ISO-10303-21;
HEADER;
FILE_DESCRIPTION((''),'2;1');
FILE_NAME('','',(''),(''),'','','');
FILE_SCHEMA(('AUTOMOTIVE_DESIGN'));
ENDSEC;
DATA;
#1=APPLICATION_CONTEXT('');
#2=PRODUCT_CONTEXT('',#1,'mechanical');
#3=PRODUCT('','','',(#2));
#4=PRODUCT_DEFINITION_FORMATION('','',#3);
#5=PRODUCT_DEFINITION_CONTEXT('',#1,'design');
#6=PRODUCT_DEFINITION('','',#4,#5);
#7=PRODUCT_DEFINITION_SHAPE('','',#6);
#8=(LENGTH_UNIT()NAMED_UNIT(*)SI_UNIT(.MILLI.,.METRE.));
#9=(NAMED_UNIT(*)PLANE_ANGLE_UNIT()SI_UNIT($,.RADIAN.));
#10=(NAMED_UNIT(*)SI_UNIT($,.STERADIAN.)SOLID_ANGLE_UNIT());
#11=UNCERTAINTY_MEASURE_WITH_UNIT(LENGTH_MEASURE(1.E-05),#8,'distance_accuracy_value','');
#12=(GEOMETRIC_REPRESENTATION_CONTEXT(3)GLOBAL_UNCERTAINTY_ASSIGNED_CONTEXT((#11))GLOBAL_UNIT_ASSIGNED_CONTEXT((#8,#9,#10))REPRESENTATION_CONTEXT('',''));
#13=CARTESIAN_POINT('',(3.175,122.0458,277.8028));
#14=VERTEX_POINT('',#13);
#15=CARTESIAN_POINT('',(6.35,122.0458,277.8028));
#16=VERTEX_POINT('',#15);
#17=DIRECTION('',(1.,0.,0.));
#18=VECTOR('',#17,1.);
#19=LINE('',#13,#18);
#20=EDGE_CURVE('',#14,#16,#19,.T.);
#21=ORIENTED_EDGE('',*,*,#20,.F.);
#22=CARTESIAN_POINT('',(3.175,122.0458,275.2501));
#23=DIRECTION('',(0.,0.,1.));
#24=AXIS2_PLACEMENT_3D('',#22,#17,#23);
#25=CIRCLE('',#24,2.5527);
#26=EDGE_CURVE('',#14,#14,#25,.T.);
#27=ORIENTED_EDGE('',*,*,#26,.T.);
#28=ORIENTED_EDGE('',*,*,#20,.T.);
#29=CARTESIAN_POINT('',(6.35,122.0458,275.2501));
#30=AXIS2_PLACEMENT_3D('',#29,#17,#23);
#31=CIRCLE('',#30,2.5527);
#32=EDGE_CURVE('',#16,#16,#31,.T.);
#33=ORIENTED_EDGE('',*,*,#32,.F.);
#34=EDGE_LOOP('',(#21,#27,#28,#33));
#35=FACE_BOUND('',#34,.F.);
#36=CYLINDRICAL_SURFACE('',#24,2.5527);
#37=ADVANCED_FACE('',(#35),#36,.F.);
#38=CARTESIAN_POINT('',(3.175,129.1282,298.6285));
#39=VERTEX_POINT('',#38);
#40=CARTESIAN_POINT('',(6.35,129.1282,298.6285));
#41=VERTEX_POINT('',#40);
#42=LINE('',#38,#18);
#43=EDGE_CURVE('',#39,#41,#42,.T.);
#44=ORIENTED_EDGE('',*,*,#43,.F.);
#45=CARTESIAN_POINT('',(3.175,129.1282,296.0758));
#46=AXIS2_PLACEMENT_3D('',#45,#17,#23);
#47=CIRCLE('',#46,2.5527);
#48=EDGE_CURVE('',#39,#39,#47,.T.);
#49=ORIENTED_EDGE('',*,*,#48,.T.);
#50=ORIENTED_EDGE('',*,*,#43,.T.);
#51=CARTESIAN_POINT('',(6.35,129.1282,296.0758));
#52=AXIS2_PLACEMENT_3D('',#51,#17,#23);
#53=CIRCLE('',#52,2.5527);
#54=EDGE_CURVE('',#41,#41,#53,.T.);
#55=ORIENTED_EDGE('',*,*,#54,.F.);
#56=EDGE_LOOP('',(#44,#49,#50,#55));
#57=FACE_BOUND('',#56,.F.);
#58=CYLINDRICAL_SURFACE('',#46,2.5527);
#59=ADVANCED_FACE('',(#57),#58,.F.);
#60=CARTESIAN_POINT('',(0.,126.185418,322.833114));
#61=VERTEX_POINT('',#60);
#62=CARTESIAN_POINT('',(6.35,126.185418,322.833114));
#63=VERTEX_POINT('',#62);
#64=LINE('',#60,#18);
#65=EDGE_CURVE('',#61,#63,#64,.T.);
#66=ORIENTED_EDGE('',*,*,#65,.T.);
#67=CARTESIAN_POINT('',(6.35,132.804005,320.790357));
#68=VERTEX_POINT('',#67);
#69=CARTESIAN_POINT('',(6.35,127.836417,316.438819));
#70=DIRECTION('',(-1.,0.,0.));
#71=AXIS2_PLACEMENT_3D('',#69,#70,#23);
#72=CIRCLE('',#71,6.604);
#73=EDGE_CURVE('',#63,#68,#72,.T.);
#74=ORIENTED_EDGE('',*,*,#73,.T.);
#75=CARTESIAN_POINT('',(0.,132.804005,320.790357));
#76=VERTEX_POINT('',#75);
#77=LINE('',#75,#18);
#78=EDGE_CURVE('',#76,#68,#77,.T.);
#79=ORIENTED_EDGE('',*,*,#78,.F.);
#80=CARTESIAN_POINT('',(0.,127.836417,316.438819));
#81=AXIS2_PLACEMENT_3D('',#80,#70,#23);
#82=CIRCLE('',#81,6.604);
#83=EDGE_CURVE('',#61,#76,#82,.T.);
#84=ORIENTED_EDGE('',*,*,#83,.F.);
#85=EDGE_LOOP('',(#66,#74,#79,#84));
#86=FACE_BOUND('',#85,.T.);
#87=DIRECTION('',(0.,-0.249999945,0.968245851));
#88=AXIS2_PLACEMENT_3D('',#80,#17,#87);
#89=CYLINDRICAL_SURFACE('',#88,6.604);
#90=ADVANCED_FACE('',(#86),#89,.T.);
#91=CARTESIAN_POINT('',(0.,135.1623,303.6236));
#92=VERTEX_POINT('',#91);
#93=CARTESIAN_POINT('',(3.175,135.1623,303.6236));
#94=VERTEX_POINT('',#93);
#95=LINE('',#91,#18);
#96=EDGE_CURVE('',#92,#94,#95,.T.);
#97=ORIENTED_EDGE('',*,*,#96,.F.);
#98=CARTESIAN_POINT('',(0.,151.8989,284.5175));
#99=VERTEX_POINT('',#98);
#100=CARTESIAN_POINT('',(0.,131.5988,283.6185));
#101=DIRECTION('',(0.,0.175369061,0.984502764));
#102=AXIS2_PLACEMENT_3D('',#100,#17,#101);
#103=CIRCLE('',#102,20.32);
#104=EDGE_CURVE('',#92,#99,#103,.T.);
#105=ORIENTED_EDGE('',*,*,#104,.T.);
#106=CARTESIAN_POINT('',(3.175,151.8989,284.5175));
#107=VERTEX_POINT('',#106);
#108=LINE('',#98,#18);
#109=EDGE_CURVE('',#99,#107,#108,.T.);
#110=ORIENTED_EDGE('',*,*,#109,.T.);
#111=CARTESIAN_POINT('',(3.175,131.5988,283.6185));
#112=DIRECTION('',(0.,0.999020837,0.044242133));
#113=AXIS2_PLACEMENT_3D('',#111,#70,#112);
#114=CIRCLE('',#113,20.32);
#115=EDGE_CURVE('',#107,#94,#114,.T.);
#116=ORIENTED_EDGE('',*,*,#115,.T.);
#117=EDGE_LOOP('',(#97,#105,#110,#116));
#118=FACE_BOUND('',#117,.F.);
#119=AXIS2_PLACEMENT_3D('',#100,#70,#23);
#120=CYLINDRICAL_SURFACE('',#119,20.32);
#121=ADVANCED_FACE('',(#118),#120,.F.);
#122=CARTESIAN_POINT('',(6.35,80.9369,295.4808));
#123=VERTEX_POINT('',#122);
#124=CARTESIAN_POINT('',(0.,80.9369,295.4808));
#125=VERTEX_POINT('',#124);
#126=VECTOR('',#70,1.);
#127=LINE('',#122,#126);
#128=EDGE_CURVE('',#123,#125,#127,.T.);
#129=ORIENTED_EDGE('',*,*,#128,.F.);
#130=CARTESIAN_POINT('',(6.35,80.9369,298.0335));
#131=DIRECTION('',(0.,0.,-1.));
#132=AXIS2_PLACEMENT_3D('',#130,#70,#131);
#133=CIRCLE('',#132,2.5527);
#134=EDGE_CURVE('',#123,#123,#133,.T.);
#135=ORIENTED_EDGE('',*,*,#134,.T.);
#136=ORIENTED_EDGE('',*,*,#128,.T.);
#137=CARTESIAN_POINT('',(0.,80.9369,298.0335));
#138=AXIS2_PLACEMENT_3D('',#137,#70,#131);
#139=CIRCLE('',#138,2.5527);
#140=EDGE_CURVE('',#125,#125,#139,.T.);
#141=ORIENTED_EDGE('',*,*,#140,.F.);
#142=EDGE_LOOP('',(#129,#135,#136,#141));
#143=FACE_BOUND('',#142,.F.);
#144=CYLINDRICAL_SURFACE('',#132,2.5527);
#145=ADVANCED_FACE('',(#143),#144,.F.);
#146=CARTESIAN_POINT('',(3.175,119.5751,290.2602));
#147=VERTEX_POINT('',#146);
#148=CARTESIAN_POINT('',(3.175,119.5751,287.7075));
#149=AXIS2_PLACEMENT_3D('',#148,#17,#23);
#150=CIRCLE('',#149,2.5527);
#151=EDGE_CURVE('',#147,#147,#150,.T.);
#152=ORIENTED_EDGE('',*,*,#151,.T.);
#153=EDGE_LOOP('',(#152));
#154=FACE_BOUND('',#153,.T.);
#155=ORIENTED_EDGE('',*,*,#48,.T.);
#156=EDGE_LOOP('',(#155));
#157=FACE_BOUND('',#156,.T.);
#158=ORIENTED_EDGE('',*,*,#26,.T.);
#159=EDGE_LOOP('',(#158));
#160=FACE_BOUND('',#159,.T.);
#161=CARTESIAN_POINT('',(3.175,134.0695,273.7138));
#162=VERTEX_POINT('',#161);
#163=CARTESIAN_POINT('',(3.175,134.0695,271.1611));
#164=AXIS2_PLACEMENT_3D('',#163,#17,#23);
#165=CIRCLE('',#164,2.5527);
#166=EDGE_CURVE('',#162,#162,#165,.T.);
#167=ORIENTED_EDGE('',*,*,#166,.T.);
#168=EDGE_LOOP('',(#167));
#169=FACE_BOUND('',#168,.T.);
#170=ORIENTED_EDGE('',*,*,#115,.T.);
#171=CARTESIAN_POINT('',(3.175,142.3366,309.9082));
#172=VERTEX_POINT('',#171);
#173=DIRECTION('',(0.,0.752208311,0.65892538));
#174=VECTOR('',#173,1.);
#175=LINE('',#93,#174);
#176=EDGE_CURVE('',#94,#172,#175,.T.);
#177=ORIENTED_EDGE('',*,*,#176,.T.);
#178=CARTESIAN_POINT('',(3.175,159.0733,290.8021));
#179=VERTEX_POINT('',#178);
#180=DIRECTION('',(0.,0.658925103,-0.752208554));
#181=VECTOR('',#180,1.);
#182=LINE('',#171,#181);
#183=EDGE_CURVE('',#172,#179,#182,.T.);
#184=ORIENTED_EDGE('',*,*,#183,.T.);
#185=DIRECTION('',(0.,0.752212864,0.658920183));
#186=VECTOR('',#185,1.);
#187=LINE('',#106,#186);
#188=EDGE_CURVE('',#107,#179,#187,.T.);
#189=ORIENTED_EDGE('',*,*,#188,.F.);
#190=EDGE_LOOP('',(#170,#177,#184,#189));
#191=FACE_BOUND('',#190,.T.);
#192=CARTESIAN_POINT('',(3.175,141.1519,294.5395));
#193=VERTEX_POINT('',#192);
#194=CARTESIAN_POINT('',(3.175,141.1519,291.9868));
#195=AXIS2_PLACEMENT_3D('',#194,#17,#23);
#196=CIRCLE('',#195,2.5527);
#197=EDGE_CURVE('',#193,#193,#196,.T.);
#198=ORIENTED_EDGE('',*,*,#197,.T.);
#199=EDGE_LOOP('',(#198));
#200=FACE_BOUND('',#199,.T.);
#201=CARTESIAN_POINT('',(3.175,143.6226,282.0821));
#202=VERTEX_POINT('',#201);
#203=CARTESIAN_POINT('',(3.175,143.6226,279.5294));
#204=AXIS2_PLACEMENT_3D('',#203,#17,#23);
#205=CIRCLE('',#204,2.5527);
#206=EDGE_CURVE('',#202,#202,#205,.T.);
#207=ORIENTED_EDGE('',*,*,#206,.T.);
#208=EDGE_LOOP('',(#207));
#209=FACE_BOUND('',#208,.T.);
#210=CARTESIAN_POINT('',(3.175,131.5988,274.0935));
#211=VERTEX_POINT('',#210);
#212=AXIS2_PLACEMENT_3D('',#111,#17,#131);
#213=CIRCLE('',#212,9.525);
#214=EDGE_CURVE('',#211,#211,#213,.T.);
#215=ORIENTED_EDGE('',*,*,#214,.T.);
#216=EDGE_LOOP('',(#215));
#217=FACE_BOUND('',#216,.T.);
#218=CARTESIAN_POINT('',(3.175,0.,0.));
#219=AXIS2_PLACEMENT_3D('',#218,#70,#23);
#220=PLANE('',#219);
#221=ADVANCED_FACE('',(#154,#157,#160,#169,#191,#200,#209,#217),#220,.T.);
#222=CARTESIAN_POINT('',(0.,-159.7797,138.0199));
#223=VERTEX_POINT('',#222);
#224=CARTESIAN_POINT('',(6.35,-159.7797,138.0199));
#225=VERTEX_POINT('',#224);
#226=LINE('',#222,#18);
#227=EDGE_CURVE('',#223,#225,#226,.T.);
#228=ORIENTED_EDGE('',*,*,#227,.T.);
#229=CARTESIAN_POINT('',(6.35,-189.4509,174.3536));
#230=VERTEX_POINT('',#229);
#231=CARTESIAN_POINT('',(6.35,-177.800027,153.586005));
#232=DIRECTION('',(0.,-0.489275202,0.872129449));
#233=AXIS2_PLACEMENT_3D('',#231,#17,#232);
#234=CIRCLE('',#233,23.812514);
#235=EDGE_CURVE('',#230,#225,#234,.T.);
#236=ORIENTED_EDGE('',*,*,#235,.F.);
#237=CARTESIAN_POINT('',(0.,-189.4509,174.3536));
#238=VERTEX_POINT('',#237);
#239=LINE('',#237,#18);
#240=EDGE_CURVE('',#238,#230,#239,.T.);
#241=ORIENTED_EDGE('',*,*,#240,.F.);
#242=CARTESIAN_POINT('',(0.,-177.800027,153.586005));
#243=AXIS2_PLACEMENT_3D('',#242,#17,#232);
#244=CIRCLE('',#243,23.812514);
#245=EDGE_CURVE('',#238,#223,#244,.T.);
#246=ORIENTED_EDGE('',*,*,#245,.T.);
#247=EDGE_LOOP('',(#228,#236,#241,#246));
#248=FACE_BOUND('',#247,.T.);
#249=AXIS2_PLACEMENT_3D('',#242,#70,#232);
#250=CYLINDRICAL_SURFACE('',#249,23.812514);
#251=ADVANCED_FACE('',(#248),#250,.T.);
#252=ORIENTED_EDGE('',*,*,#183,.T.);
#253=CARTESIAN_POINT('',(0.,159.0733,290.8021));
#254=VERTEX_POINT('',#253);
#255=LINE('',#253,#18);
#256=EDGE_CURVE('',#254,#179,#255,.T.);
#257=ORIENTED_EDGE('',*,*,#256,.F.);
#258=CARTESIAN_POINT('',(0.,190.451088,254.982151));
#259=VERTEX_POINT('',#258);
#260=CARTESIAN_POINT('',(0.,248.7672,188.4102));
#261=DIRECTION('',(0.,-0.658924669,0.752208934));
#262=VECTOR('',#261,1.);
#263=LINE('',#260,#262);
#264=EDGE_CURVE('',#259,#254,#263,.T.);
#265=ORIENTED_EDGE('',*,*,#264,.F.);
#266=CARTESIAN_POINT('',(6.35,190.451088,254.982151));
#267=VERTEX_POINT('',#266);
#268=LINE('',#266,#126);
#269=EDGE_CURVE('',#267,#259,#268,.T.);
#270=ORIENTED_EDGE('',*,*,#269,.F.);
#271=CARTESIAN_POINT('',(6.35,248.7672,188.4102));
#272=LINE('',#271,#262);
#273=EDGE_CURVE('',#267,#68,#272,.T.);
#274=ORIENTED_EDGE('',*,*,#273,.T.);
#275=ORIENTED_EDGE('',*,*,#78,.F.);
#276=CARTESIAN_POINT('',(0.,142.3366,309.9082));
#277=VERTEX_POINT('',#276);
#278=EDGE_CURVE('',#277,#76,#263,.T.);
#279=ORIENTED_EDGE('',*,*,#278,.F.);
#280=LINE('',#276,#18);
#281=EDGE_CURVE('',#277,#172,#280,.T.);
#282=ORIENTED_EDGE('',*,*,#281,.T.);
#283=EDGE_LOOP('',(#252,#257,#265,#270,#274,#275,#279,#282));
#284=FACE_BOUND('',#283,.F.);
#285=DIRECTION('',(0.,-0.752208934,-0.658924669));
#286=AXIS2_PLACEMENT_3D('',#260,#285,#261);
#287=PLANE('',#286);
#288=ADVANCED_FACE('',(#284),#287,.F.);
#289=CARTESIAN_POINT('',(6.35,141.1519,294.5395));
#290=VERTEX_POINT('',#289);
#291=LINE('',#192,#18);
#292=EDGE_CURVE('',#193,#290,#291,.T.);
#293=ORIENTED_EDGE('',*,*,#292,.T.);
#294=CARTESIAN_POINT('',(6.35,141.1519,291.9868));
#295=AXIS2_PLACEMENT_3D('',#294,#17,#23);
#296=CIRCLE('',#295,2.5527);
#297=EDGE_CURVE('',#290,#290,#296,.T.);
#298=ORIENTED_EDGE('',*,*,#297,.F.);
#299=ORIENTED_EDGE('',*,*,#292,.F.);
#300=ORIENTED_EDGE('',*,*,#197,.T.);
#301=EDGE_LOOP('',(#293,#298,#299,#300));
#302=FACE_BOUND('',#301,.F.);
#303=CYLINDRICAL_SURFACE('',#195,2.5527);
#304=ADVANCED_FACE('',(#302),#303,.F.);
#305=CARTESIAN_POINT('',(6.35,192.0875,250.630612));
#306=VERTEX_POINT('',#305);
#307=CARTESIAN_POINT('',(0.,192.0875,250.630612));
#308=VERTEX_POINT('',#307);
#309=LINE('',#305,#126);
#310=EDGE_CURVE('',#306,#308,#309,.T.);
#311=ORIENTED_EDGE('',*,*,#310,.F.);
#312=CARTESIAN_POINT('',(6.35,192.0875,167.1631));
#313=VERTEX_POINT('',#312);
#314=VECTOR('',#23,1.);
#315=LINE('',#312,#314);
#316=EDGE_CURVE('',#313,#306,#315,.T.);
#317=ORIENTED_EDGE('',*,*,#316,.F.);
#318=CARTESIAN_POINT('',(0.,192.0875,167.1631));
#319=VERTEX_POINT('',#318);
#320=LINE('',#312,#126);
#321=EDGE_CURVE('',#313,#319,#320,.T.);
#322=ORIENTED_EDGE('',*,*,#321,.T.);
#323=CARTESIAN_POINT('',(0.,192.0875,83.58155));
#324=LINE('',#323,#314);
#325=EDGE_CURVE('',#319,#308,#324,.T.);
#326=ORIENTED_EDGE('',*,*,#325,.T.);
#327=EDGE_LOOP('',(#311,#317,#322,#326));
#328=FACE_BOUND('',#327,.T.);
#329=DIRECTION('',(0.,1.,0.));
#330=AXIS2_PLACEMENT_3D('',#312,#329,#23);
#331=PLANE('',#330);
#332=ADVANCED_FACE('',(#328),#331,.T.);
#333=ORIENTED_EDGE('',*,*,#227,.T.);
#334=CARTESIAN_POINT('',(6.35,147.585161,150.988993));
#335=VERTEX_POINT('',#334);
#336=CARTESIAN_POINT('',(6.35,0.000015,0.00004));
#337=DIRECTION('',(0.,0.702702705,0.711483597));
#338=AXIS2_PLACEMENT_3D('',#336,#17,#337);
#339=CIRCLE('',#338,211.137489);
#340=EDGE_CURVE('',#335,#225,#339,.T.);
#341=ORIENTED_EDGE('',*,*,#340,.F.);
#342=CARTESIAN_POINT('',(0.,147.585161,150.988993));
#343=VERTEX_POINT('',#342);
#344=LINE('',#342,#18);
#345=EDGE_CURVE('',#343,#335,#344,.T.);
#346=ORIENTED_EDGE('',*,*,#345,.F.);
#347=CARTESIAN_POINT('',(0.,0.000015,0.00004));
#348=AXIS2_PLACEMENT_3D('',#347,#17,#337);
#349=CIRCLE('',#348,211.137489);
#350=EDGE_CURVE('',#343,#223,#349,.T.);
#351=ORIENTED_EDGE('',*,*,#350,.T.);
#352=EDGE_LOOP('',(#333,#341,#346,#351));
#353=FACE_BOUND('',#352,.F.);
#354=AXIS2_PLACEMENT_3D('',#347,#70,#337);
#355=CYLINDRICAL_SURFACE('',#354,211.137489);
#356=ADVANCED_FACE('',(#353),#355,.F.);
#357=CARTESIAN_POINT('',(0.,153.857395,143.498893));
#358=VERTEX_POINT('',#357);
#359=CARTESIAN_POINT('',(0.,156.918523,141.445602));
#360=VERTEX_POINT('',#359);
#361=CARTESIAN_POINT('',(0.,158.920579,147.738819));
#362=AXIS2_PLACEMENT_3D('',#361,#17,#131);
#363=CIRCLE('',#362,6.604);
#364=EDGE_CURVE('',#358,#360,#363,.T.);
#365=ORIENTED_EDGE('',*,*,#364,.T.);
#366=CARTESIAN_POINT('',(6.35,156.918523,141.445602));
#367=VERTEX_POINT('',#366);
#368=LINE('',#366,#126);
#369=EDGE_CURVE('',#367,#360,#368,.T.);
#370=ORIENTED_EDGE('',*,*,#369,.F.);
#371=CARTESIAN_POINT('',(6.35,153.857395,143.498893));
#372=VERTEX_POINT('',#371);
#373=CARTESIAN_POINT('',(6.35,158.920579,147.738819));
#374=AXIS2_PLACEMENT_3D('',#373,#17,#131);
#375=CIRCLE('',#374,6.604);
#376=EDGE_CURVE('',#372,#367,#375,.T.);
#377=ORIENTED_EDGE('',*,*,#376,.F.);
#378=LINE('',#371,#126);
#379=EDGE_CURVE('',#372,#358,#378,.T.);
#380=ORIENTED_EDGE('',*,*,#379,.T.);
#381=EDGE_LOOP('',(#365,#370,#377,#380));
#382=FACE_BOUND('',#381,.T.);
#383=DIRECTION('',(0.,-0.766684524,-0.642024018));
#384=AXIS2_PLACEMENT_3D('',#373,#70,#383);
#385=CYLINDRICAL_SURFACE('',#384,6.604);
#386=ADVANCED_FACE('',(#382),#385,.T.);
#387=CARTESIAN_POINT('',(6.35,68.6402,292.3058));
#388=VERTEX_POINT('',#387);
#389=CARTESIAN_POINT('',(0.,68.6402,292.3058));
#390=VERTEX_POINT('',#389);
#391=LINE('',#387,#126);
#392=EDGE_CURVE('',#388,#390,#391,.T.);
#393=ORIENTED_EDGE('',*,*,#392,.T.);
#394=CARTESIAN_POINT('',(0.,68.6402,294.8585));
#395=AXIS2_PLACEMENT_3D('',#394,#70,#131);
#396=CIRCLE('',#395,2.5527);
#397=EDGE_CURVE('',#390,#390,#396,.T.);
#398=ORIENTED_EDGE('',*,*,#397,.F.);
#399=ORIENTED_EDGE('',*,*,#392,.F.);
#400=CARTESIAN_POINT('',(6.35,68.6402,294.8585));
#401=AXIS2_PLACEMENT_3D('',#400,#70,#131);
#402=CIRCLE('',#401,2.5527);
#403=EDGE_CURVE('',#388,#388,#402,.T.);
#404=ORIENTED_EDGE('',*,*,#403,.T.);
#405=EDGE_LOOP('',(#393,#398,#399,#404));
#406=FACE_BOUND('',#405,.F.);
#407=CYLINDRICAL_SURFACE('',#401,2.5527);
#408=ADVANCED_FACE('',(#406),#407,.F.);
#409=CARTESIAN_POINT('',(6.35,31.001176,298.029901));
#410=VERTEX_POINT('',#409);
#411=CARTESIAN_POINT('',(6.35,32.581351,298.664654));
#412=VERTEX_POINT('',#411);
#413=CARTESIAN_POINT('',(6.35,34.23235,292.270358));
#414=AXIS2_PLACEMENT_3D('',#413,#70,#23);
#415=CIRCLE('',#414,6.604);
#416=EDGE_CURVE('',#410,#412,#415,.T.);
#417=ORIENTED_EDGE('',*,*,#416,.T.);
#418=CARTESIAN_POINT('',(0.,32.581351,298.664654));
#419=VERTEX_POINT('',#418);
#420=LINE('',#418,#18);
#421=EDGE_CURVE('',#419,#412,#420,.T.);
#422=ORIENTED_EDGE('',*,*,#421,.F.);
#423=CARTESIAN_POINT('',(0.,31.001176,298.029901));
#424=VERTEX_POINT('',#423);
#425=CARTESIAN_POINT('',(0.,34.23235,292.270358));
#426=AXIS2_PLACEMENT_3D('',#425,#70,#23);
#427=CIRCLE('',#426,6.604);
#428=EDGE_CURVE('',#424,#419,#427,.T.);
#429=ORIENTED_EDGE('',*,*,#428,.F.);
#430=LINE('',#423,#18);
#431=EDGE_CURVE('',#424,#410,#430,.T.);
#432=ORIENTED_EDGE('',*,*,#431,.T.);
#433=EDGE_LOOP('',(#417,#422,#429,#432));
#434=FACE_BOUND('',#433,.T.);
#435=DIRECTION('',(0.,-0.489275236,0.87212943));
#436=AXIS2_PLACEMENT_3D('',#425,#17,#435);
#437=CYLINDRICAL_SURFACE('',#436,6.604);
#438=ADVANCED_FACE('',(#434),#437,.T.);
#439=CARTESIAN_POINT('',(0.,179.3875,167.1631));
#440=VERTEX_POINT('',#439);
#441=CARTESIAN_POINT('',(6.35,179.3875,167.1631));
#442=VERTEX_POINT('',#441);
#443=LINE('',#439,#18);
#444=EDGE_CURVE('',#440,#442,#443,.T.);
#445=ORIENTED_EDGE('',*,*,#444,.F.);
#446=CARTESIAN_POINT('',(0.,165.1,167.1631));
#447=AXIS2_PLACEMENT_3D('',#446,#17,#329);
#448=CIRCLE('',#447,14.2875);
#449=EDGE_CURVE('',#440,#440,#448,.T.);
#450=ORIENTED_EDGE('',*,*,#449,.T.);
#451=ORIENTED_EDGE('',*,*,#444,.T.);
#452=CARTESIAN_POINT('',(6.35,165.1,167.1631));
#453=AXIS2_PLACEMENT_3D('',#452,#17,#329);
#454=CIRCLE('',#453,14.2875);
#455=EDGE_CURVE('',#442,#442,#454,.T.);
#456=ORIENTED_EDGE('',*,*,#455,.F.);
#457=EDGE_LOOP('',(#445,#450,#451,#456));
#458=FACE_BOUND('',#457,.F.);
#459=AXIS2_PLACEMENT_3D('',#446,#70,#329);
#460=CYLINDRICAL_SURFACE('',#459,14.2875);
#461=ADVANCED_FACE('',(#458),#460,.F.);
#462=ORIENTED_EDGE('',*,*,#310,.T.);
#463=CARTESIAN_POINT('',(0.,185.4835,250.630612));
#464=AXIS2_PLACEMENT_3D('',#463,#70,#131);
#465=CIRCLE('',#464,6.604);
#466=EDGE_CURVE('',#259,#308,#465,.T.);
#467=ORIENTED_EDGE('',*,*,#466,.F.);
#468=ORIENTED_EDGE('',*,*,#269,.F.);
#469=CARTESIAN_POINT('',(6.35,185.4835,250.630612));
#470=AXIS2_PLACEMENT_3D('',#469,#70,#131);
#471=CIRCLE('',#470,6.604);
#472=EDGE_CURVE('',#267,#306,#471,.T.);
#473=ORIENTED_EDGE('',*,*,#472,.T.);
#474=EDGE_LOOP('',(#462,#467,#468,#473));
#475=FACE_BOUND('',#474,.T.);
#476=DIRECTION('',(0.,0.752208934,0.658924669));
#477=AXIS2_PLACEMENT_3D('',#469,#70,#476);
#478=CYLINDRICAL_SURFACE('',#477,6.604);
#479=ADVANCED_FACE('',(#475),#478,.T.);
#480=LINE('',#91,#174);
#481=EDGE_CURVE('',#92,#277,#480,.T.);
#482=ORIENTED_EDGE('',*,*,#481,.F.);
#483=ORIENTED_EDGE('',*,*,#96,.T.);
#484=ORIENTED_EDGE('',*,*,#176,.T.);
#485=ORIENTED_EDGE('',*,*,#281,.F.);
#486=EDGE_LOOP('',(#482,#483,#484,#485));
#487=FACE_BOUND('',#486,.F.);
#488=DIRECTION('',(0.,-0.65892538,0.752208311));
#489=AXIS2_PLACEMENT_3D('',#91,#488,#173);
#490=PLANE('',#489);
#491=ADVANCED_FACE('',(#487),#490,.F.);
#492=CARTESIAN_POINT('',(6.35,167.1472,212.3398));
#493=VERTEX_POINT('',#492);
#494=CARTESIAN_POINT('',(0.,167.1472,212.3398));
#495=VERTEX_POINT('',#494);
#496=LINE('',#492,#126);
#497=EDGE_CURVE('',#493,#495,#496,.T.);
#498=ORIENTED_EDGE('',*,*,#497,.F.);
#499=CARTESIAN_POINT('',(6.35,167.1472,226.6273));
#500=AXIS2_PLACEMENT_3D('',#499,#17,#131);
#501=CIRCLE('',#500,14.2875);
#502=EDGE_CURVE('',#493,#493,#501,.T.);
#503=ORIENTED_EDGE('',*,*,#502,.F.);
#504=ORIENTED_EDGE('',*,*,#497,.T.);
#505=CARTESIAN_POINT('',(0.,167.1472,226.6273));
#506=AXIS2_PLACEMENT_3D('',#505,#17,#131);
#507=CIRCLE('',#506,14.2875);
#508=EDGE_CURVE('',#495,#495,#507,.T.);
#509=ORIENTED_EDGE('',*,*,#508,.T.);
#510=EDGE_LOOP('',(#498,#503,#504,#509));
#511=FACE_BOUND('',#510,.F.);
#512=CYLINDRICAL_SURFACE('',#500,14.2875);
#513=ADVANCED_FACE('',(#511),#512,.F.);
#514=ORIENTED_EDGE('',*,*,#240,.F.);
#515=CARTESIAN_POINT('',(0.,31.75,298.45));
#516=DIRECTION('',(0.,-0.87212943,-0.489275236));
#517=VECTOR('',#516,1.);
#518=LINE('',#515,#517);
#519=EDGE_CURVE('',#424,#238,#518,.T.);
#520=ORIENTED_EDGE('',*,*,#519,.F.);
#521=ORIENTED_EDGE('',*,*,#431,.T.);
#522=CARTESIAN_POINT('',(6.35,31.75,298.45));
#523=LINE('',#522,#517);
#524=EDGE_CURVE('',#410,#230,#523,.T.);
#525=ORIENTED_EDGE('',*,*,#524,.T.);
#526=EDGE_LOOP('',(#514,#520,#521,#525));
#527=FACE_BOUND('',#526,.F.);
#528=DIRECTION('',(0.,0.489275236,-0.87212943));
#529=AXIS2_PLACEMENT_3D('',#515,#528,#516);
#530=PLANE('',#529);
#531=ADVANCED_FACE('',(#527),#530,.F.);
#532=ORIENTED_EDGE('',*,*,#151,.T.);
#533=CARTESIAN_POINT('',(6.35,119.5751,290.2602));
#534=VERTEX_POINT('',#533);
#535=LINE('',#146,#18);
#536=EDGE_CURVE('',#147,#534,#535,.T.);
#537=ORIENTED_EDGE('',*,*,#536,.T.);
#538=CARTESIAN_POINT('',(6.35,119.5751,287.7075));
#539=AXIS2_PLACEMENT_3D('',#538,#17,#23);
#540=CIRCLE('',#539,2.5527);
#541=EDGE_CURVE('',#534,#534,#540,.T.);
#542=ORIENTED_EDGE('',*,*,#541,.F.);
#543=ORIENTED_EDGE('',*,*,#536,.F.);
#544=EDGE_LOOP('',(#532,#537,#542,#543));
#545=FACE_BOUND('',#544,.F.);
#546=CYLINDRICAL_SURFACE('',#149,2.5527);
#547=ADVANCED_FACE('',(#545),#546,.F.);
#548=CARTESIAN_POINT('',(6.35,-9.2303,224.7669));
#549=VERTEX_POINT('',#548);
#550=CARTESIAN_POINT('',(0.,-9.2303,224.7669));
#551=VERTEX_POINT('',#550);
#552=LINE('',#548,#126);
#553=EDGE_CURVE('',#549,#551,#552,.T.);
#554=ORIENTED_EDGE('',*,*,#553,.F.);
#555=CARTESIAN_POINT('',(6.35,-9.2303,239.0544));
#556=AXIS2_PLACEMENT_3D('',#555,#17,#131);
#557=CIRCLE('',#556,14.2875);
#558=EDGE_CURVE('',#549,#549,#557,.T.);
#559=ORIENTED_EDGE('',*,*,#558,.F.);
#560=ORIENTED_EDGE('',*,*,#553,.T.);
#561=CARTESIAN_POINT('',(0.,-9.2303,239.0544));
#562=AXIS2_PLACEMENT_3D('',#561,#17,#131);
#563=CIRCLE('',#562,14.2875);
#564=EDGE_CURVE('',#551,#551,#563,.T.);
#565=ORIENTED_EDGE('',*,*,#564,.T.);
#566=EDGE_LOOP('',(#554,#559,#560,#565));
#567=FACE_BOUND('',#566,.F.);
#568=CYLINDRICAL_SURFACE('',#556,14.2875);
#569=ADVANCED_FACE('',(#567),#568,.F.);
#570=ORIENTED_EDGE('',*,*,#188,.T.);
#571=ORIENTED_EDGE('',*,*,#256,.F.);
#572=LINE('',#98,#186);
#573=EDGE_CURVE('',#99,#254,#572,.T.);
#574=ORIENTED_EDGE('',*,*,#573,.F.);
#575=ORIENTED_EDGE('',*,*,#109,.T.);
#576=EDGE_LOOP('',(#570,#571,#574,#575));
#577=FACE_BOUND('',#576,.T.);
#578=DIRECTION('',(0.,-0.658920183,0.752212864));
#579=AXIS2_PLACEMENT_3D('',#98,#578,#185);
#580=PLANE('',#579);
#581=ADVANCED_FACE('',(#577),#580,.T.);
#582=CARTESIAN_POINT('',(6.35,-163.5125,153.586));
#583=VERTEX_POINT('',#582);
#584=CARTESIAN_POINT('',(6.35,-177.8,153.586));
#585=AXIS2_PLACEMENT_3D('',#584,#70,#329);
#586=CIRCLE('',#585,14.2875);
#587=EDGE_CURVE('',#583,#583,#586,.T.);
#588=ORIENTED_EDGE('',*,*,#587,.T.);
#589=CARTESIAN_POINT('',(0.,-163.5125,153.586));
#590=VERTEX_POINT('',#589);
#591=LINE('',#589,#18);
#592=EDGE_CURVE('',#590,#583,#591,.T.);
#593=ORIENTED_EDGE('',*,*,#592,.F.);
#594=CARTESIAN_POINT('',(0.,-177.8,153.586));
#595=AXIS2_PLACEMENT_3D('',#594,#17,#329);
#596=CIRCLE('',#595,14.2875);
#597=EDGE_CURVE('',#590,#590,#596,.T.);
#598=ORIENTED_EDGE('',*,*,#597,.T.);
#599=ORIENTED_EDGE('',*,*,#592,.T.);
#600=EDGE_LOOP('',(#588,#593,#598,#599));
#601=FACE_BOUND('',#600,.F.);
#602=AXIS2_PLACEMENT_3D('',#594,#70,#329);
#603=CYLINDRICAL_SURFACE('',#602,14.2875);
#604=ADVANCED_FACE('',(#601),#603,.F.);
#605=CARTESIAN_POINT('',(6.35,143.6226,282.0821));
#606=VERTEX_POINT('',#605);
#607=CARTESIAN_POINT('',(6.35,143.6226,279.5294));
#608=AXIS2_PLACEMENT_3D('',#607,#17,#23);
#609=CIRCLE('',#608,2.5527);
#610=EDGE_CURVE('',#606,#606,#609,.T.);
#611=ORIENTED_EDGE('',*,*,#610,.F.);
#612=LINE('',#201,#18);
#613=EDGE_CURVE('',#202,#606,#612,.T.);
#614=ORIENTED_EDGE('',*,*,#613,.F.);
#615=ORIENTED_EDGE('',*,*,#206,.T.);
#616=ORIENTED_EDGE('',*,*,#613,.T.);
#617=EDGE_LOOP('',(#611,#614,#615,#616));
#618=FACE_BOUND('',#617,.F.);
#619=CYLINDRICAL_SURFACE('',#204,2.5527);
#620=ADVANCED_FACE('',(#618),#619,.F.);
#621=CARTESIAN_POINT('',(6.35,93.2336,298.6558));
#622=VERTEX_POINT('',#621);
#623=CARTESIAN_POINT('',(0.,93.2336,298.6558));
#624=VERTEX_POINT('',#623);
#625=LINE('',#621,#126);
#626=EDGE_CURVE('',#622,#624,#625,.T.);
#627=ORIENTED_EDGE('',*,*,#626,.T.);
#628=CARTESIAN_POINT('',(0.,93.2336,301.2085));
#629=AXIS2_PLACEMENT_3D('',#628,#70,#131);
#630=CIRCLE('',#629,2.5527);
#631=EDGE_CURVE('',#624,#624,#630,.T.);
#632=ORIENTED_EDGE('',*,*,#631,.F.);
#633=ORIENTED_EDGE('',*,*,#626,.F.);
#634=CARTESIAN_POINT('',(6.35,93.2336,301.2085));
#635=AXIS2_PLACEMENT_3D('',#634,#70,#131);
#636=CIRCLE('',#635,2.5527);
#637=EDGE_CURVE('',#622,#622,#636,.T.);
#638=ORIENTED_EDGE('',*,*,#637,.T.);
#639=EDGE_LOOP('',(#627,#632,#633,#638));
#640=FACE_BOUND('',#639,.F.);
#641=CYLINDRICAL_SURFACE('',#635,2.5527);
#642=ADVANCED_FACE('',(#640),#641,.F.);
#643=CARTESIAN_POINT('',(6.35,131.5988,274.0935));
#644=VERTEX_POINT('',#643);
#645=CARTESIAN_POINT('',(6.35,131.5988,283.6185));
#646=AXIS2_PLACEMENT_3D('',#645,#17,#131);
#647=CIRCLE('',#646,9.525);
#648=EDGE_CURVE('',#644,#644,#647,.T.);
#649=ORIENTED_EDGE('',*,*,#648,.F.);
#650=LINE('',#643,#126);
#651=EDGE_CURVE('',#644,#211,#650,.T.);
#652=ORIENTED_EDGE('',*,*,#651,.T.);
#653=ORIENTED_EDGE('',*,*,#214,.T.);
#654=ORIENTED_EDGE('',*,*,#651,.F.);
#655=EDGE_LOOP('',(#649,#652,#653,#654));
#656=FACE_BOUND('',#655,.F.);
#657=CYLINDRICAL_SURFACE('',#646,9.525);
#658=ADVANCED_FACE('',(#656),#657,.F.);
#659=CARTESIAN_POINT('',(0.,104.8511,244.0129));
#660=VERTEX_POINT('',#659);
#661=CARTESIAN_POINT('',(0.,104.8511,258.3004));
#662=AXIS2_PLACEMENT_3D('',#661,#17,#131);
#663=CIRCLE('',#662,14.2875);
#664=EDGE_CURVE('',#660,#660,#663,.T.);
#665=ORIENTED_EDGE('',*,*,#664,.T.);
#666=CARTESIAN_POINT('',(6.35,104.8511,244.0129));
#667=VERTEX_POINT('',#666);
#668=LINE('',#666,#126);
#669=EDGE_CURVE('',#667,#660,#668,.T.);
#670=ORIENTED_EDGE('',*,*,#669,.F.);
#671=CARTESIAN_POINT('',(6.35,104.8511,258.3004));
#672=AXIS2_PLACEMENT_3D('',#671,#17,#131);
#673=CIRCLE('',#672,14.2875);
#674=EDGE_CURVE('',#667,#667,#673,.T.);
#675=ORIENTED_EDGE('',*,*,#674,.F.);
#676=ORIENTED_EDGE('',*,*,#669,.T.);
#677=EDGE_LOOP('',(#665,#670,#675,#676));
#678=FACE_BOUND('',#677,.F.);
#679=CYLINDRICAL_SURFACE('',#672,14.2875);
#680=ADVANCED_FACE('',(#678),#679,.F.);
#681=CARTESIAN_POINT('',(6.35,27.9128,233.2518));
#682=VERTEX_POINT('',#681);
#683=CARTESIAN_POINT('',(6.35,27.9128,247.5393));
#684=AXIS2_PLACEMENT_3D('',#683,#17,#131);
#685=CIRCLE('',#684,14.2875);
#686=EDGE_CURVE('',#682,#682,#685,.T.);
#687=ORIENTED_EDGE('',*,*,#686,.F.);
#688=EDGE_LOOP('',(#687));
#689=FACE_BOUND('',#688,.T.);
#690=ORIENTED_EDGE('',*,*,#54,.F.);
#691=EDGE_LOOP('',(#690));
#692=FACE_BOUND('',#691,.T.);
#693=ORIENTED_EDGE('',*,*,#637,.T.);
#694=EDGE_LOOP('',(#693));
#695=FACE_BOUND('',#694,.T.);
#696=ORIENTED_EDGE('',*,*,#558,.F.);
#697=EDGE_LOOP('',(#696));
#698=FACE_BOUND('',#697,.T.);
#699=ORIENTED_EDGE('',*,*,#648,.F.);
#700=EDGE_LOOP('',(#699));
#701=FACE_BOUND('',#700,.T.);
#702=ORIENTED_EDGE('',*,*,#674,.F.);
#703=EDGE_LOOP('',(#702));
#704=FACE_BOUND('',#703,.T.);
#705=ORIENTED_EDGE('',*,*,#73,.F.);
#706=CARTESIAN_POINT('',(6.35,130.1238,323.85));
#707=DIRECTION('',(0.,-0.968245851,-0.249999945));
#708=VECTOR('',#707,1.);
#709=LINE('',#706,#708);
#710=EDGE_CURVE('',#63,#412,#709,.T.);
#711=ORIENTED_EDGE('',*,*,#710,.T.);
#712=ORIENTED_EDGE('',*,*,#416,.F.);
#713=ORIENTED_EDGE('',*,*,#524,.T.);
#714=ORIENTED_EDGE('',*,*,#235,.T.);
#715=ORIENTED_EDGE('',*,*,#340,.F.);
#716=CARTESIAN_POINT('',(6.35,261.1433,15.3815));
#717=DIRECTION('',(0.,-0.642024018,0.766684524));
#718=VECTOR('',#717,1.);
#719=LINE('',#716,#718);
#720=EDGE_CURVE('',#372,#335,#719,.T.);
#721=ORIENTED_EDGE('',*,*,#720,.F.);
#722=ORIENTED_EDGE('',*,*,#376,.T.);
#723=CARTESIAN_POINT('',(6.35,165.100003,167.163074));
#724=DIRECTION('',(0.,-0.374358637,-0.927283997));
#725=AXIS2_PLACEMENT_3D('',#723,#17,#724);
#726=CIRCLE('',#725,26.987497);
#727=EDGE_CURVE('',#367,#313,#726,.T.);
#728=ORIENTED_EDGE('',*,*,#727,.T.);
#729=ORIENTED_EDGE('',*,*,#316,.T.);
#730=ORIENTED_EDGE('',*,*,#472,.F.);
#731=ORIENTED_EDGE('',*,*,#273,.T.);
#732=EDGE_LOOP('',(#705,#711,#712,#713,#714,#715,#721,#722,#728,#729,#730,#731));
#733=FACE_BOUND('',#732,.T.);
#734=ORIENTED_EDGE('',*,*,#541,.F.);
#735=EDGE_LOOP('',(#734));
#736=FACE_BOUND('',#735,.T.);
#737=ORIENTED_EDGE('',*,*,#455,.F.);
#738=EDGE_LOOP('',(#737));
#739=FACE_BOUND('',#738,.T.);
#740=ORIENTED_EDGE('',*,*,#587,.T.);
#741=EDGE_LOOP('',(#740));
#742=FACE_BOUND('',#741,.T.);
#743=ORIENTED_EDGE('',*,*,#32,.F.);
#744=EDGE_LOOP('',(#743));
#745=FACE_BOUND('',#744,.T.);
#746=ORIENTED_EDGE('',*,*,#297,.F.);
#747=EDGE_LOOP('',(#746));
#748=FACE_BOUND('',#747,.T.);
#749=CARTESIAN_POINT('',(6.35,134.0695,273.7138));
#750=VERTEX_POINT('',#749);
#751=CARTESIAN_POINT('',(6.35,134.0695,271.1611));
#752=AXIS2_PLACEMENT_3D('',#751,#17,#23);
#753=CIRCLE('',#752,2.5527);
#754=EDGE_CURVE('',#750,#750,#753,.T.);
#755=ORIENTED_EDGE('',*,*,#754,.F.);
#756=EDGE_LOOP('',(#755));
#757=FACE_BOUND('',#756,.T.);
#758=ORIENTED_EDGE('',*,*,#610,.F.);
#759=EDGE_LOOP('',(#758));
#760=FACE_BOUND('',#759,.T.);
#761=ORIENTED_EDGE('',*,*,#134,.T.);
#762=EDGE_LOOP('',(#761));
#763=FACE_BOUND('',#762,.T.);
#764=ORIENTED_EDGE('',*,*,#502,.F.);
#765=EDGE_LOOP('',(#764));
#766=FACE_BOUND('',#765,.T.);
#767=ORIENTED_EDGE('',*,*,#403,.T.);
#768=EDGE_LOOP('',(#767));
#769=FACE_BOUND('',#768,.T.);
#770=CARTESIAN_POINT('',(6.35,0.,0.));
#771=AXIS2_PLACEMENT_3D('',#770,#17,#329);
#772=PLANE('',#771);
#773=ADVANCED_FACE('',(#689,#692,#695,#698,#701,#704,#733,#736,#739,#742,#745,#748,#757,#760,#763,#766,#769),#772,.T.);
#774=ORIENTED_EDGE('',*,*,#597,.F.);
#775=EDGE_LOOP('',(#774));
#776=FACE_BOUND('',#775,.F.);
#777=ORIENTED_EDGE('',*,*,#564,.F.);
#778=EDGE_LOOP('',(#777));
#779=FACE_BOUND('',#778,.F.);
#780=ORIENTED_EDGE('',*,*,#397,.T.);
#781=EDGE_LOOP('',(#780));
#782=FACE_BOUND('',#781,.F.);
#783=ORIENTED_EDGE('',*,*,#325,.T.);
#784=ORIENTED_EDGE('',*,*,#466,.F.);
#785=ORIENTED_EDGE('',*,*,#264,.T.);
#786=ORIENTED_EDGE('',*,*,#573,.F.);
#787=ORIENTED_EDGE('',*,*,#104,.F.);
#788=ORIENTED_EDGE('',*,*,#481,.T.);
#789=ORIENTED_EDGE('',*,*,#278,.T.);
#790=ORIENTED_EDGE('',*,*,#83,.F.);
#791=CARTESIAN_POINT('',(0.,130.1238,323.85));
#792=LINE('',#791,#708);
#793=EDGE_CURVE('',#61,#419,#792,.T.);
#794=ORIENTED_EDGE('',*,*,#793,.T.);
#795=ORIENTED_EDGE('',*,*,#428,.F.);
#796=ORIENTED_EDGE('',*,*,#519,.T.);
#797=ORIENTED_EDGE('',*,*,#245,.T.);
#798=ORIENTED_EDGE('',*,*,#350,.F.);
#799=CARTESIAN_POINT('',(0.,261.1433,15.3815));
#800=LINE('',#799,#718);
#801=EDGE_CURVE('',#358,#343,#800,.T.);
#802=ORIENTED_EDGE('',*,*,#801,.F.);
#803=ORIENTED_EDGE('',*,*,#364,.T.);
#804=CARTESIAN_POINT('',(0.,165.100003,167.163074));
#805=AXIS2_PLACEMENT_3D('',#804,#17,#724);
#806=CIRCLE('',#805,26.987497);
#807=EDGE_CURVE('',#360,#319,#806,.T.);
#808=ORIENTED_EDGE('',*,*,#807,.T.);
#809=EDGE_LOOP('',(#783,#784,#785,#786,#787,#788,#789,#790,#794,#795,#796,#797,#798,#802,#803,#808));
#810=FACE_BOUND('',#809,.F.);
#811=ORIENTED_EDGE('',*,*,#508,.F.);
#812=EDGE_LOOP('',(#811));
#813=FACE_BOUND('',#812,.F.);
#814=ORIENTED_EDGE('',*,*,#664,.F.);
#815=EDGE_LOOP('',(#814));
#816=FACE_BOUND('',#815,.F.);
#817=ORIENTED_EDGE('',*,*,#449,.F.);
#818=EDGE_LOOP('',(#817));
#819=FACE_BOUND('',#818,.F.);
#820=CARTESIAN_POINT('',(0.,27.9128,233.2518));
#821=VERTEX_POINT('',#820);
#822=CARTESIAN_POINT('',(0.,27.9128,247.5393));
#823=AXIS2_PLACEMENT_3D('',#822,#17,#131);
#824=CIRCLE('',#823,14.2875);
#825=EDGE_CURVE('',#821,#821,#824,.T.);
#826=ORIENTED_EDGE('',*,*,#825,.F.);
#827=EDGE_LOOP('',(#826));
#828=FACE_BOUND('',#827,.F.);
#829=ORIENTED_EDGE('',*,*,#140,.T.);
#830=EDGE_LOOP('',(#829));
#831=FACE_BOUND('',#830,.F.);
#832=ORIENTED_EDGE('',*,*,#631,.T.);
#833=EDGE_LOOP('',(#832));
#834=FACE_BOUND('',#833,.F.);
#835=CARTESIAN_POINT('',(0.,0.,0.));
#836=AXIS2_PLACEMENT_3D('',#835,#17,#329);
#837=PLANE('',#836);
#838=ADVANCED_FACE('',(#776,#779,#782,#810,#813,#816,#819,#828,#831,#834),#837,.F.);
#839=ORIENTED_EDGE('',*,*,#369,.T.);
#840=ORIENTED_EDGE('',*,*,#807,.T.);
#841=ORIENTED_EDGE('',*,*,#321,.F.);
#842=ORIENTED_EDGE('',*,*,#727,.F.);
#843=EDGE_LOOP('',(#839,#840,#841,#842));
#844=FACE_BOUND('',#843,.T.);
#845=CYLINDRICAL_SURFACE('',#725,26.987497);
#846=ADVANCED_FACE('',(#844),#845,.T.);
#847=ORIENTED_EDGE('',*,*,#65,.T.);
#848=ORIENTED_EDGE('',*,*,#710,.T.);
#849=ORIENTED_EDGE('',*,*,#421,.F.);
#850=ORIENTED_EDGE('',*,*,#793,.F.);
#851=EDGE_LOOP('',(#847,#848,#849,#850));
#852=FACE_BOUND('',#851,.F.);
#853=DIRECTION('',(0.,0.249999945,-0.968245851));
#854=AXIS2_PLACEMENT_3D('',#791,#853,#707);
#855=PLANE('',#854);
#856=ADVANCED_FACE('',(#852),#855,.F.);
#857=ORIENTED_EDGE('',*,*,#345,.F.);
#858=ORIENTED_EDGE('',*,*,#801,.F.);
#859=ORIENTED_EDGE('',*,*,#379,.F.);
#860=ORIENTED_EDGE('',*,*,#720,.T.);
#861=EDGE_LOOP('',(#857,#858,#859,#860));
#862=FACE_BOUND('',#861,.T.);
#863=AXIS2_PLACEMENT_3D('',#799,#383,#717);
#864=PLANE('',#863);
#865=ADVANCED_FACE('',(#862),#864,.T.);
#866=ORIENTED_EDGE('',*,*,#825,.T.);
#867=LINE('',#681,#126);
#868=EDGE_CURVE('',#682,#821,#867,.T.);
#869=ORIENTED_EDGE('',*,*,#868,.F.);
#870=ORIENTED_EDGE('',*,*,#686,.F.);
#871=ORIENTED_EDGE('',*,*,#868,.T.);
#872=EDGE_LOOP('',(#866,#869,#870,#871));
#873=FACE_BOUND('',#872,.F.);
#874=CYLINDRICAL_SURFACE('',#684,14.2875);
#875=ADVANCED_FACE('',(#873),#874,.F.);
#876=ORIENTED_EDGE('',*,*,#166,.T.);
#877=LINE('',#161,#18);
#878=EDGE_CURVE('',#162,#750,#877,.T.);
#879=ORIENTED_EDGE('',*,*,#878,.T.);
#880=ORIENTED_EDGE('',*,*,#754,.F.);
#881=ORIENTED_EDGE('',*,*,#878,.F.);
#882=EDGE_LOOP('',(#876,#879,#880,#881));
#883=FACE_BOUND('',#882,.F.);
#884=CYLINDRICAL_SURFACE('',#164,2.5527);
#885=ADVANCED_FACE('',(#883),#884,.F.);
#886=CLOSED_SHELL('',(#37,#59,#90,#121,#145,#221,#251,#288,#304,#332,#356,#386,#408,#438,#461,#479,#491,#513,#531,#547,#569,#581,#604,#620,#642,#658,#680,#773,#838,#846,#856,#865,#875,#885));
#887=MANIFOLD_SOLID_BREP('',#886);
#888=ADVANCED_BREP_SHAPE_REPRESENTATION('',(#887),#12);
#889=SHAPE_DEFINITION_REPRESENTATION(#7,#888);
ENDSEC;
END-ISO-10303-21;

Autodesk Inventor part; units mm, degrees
ref_plane "YZ Plane" through (0, 0, 0) normal (1, 0, 0) x (0, 1, 0)
ref_plane "XZ Plane" through (0, 0, 0) normal (0, 1, 0) x (-1, 0, 0)
ref_plane "XY Plane" through (0, 0, 0) normal (0, 0, 1) x (1, 0, 0)
sketch "Sketch1" plane through (0, 0, 0) normal (1, 0, 0) x (0, 1, 0)
  circle A0 centre (0, 0) radius 203.2 construction
  circle A1 centre (165.1, 167.1631) radius 38.1 construction
  circle A2 centre (165.1, 167.1631) radius 31.75 construction
  circle A3 centre (-177.8, 153.586) radius 38.1 construction
  circle A4 centre (-177.8, 153.586) radius 31.75 construction
  circle A5 centre (279.4, 30.6697) radius 38.1 construction
  circle A6 centre (279.4, 30.6697) radius 31.75 construction
  line L0 (371.6722, 159.6086) -> (293.9242, 243.3925) construction
  line L1 (293.9242, 243.3925) -> (72.8278, 38.2242) construction
  line L2 (72.8278, 38.2242) -> (150.5758, -45.5597) construction
  line L3 (150.5758, -45.5597) -> (371.6722, 159.6086) construction
  line L4 (371.6722, 159.6086) -> (72.8278, 38.2242) construction
  line L5 (293.9242, 243.3925) -> (150.5758, -45.5597) construction
  line L6 (165.1, 167.1631) -> (279.4, 30.6697) construction
  point P0 (222.25, 98.9164)
  dimension "d0" = 406.4
  dimension "d1" = 76.2
  dimension "d2" = 6.35
  dimension "d4" = 114.3
  dimension "d5" = 301.625
  dimension "d6" = 177.8
  dimension "d51" = 165.1
  dimension "d52" = 279.4
  dimension "d53" = 30.6697
sketch "Sketch4" plane through (0, 0, 0) normal (1, 0, 0) x (0, 1, 0)
  circle A0 centre (0, 0) radius 203.2 construction
  circle A1 centre (165.1, 167.1631) radius 38.1 construction
  circle A2 centre (165.1, 167.1631) radius 31.75 construction
  circle A3 centre (-177.8, 153.586) radius 38.1 construction
  circle A4 centre (-177.8, 153.586) radius 31.75 construction
  circle A5 centre (279.4, 30.6697) radius 38.1 construction
  circle A6 centre (279.4, 30.6697) radius 31.75 construction
  line L0 (371.6722, 159.6086) -> (293.9242, 243.3925) construction
  line L1 (293.9242, 243.3925) -> (72.8278, 38.2242) construction
  line L2 (72.8278, 38.2242) -> (150.5758, -45.5597) construction
  line L3 (150.5758, -45.5597) -> (371.6722, 159.6086) construction
  line L4 (371.6722, 159.6086) -> (72.8278, 38.2242) construction
  line L5 (293.9242, 243.3925) -> (150.5758, -45.5597) construction
  line L6 (165.1, 167.1631) -> (279.4, 30.6697) construction
  circle A7 centre (-177.8, 153.586) radius 14.2875
  circle A8 centre (165.1, 167.1631) radius 14.2875
  circle A9 centre (279.4, 30.6697) radius 14.2875
  circle A10 centre (165.1, 167.1631) radius 23.8125 construction
  circle A11 centre (279.4, 30.6697) radius 23.8125 construction
  circle A12 centre (-177.8, 153.586) radius 23.8125 construction
  line L7 (261.1433, 15.3815) -> (146.8433, 151.8749)
  line L8 (309.92, 115.3835) -> (248.7672, 188.4102)
  line L9 (309.92, 115.3835) -> (303.1398, 28.8105)
  line L10 (248.7672, 188.4102) -> (130.1238, 323.85)
  line L11 (130.1238, 323.85) -> (31.75, 298.45)
  line L12 (31.75, 298.45) -> (-189.4509, 174.3536)
  arc A13 (148.3669, 150.2209) -> (-159.7797, 138.0199) centre (0, 0) ccw
  arc A14 (148.3669, 150.2209) -> (146.8433, 151.8749) centre (165.1, 167.1631) ccw
  arc A15 (256.4562, 24.2964) -> (303.1398, 28.8105) centre (279.4, 30.6697) ccw
  line L13 (332.7982, 201.5005) -> (111.7018, -3.6678) construction
  arc A16 (-189.4509, 174.3536) -> (-159.7797, 138.0199) centre (-177.8, 153.586) ccw
  point P0 (222.25, 98.9164)
  point P1 (279.3436, 151.8969)
  point P2 (261.1433, 15.3815)
  point P3 (147.5854, 150.9888)
  dimension "d27" = 28.575
  dimension "d29" = 9.525
  dimension "d31" = 101.6
  dimension "d33" = 101.6
  dimension "d35" = 95.25
  dimension "d58" = 298.45
  dimension "d59" = 323.85
  dimension "d60" = 31.75
extrude "Extrusion2" add sketch "Sketch4" along normal blind 6.35 contours L7 A14 A13 | L7 A13 A16 L12 L11 L10 L8 L9 A15
sketch "Sketch5" plane through (6.35, 0, 0) normal (1, 0, 0) x (0, 0, -1)
  line L0 (-323.85, 130.1238) -> (-298.45, 31.75)
  line L1 (-301.2085, 93.2336) -> (-294.8585, 68.6402) construction
  point P0 (0, 0)
  point P1 (-298.0335, 80.9369)
  point P2 (-311.15, 80.9369)
  point P3 (-298.0335, 80.9369)
  point P4 (-311.15, 80.9369)
  dimension "d39" = 12.7
  dimension "d57" = 25.4
hole "Hole2" at (6.35, 93.2336, 301.2085) at (6.35, 80.9369, 298.0335) at (6.35, 68.6402, 294.8585) direction (-1, 0, 0) diameter 5.1054 end through all
sketch "Sketch6" plane through (6.35, 0, 0) normal (1, 0, 0) x (0, 0, -1)
  circle A0 centre (-298.0335, 80.9369) radius 2.5527
  circle A1 centre (-301.2085, 93.2336) radius 2.5527
  circle A2 centre (-294.8585, 68.6402) radius 2.5527
  arc A3 (-15.3815, 261.1433) -> (-28.8105, 303.1398) centre (-30.6697, 279.4) ccw
  line L0 (-28.8105, 303.1398) -> (-115.3835, 309.92)
  line L1 (-115.3835, 309.92) -> (-188.4102, 248.7672)
  line L2 (-188.4102, 248.7672) -> (-323.85, 130.1238)
  line L3 (-323.85, 130.1238) -> (-298.45, 31.75)
  line L4 (-298.45, 31.75) -> (-174.3536, -189.4509)
  arc A4 (-174.3536, -189.4509) -> (-138.0199, -159.7797) centre (-153.586, -177.8) ccw
  arc A5 (-150.9888, 147.5854) -> (-138.0199, -159.7797) centre (0, 0) ccw
  line L5 (-150.9888, 147.5854) -> (-15.3815, 261.1433)
  circle A6 centre (-30.6697, 279.4) radius 14.2875
  circle A7 centre (-167.1631, 165.1) radius 14.2875
  circle A8 centre (-153.586, -177.8) radius 14.2875
  circle A9 centre (-167.1631, 165.1) radius 26.9875 construction
  line L6 (-167.1631, 192.0875) -> (-253.1141, 192.0875)
  line L7 (-188.4102, 248.7672) -> (-323.85, 130.1238) construction
  circle A10 centre (-167.1631, 165.1) radius 14.2875 construction
  line L8 (-150.9888, 147.5854) -> (-15.3815, 261.1433) construction
  arc A11 (-142.138, 154.997) -> (-167.1631, 192.0875) centre (-167.1631, 165.1) ccw
  dimension "d65" = 12.7
extrude "Extrusion3" cut sketch "Sketch6" against normal blind 25.4 contours A0 | A1 | A2 | L5 A11 L6 L2 L1 L0 A3 | A8
fillet "Fillet1" radius 6.604 4 edges at (3.175, 192.0875, 253.1141) (3.175, 130.1238, 323.85) (3.175, 31.75, 298.45) (3.175, 154.997, 142.138)
sketch "Sketch8" plane through (6.35, 0, 0) normal (1, 0, 0) x (0, 0, -1)
  circle A0 centre (-283.6185, 131.5988) radius 7.6454 construction
  circle A1 centre (-283.6185, 131.5988) radius 19.05 construction
  circle A2 centre (-167.1631, 165.1) radius 28.6512 construction
  arc A3 (-320.7904, 132.804) -> (-322.8331, 126.1854) centre (-316.4388, 127.8364) ccw construction
  line L0 (-320.7904, 132.804) -> (-254.9821, 190.4511) construction
  arc A4 (-250.6306, 192.0875) -> (-254.9821, 190.4511) centre (-250.6306, 185.4835) ccw construction
  line L1 (-250.6306, 192.0875) -> (-167.1631, 192.0875) construction
  arc A5 (-141.4456, 156.9185) -> (-167.1631, 192.0875) centre (-167.1631, 165.1) ccw construction
  arc A6 (-143.4989, 153.8574) -> (-141.4456, 156.9185) centre (-147.7388, 158.9206) ccw construction
  line L2 (-143.4989, 153.8574) -> (-150.9888, 147.5854) construction
  arc A7 (-150.9888, 147.5854) -> (-138.0199, -159.7797) centre (0, 0) ccw construction
  arc A8 (-174.3536, -189.4509) -> (-138.0199, -159.7797) centre (-153.586, -177.8) ccw construction
  line L3 (-174.3536, -189.4509) -> (-298.0299, 31.0012) construction
  arc A9 (-298.6647, 32.5814) -> (-298.0299, 31.0012) centre (-292.2704, 34.2324) ccw construction
  line L4 (-298.6647, 32.5814) -> (-322.8331, 126.1854) construction
  circle A10 centre (-298.0335, 80.9369) radius 2.5527 construction
  circle A11 centre (-301.2085, 93.2336) radius 2.5527 construction
  circle A12 centre (-294.8585, 68.6402) radius 2.5527 construction
  circle A13 centre (-153.586, -177.8) radius 14.2875 construction
  circle A14 centre (-167.1631, 165.1) radius 14.2875 construction
  circle A15 centre (-283.6185, 131.5988) radius 9.525
  circle A16 centre (-167.1631, 165.1) radius 14.2875
  circle A17 centre (-247.5393, 27.9128) radius 14.2875
  circle A18 centre (-247.5393, 27.9128) radius 19.05 construction
  circle A19 centre (-239.0544, -9.2303) radius 19.05 construction
  circle A20 centre (-239.0544, -9.2303) radius 14.2875
  dimension "d76" = 15.2908
  dimension "d77" = 38.1
  dimension "d78" = 57.3024
  dimension "d79" = 121.1783
  dimension "d81" = 25.4
  dimension "d83" = 19.05
  dimension "d84" = 28.575
  dimension "d85" = 158.9989
  dimension "d87" = 38.1
  dimension "d88" = 188.9989
  dimension "d111" = 31.75
extrude "Extrusion4" cut sketch "Sketch8" against normal through all
sketch "Sketch11" plane through (0, 0, 0) normal (-1, 0, 0) x (0, 0, 1)
  circle A0 centre (247.5393, 27.9128) radius 14.2875 construction
  circle A1 centre (283.6185, 131.5988) radius 9.525 construction
  circle A2 centre (239.0544, -9.2303) radius 14.2875 construction
  arc A3 (322.8331, 126.1854) -> (320.7904, 132.804) centre (316.4388, 127.8364) ccw construction
  line L0 (322.8331, 126.1854) -> (298.6647, 32.5814) construction
  arc A4 (298.0299, 31.0012) -> (298.6647, 32.5814) centre (292.2704, 34.2324) ccw construction
  line L1 (298.0299, 31.0012) -> (174.3536, -189.4509) construction
  arc A5 (138.0199, -159.7797) -> (174.3536, -189.4509) centre (153.586, -177.8) ccw construction
  arc A6 (138.0199, -159.7797) -> (150.9888, 147.5854) centre (0, 0) ccw construction
  line L2 (150.9888, 147.5854) -> (143.4989, 153.8574) construction
  arc A7 (141.4456, 156.9185) -> (143.4989, 153.8574) centre (147.7388, 158.9206) ccw construction
  arc A8 (167.1631, 192.0875) -> (141.4456, 156.9185) centre (167.1631, 165.1) ccw construction
  line L3 (167.1631, 192.0875) -> (250.6306, 192.0875) construction
  arc A9 (254.9821, 190.4511) -> (250.6306, 192.0875) centre (250.6306, 185.4835) ccw construction
  line L4 (254.9821, 190.4511) -> (320.7904, 132.804) construction
  circle A10 centre (298.0335, 80.9369) radius 2.5527 construction
  circle A11 centre (301.2085, 93.2336) radius 2.5527 construction
  circle A12 centre (294.8585, 68.6402) radius 2.5527 construction
  circle A13 centre (153.586, -177.8) radius 14.2875 construction
  circle A14 centre (167.1631, 165.1) radius 14.2875 construction
  circle A15 centre (283.6185, 131.5988) radius 20.32
  line L5 (284.5175, 151.8989) -> (290.8021, 159.0733)
  line L6 (303.6236, 135.1623) -> (309.9082, 142.3366)
  line L7 (309.9082, 142.3366) -> (290.8021, 159.0733)
  line L8 (254.9821, 190.4511) -> (320.7904, 132.804) construction
  line L9 (283.6185, 131.5988) -> (300.3551, 150.7049) construction
  dimension "d112" = 40.64
  dimension "d113" = 25.4
extrude "Extrusion6" cut sketch "Sketch11" against normal blind 3.175
sketch "Sketch12" plane through (3.175, 0, 0) normal (-1, 0, 0) x (0, 0, 1)
  circle A0 centre (247.5393, 27.9128) radius 14.2875 construction
  circle A1 centre (283.6185, 131.5988) radius 9.525 construction
  circle A2 centre (239.0544, -9.2303) radius 14.2875 construction
  arc A3 (322.8331, 126.1854) -> (320.7904, 132.804) centre (316.4388, 127.8364) ccw construction
  line L0 (322.8331, 126.1854) -> (298.6647, 32.5814) construction
  arc A4 (298.0299, 31.0012) -> (298.6647, 32.5814) centre (292.2704, 34.2324) ccw construction
  line L1 (298.0299, 31.0012) -> (174.3536, -189.4509) construction
  arc A5 (138.0199, -159.7797) -> (174.3536, -189.4509) centre (153.586, -177.8) ccw construction
  arc A6 (138.0199, -159.7797) -> (150.9888, 147.5854) centre (0, 0) ccw construction
  line L2 (150.9888, 147.5854) -> (143.4989, 153.8574) construction
  arc A7 (141.4456, 156.9185) -> (143.4989, 153.8574) centre (147.7388, 158.9206) ccw construction
  arc A8 (167.1631, 192.0875) -> (141.4456, 156.9185) centre (167.1631, 165.1) ccw construction
  line L3 (167.1631, 192.0875) -> (250.6306, 192.0875) construction
  arc A9 (254.9821, 190.4511) -> (250.6306, 192.0875) centre (250.6306, 185.4835) ccw construction
  line L4 (254.9821, 190.4511) -> (290.8021, 159.0733) construction
  line L5 (290.8021, 159.0733) -> (309.9082, 142.3366) construction
  line L6 (309.9082, 142.3366) -> (320.7904, 132.804) construction
  line L7 (290.8021, 159.0733) -> (284.5175, 151.8989) construction
  arc A10 (284.5175, 151.8989) -> (303.6236, 135.1623) centre (283.6185, 131.5988) ccw construction
  line L8 (303.6236, 135.1623) -> (309.9082, 142.3366) construction
  circle A11 centre (298.0335, 80.9369) radius 2.5527 construction
  circle A12 centre (301.2085, 93.2336) radius 2.5527 construction
  circle A13 centre (294.8585, 68.6402) radius 2.5527 construction
  circle A14 centre (153.586, -177.8) radius 14.2875 construction
  circle A15 centre (167.1631, 165.1) radius 14.2875 construction
  circle A16 centre (247.5393, 27.9128) radius 14.2875 construction
  circle A17 centre (283.6185, 131.5988) radius 9.525 construction
  circle A18 centre (239.0544, -9.2303) radius 14.2875 construction
  arc A19 (322.8331, 126.1854) -> (320.7904, 132.804) centre (316.4388, 127.8364) ccw construction
  line L9 (322.8331, 126.1854) -> (298.6647, 32.5814) construction
  arc A20 (298.0299, 31.0012) -> (298.6647, 32.5814) centre (292.2704, 34.2324) ccw construction
  line L10 (298.0299, 31.0012) -> (174.3536, -189.4509) construction
  arc A21 (138.0199, -159.7797) -> (174.3536, -189.4509) centre (153.586, -177.8) ccw construction
  arc A22 (138.0199, -159.7797) -> (150.9888, 147.5854) centre (0, 0) ccw construction
  line L11 (150.9888, 147.5854) -> (143.4989, 153.8574) construction
  arc A23 (141.4456, 156.9185) -> (143.4989, 153.8574) centre (147.7388, 158.9206) ccw construction
  arc A24 (167.1631, 192.0875) -> (141.4456, 156.9185) centre (167.1631, 165.1) ccw construction
  line L12 (167.1631, 192.0875) -> (250.6306, 192.0875) construction
  arc A25 (254.9821, 190.4511) -> (250.6306, 192.0875) centre (250.6306, 185.4835) ccw construction
  line L13 (254.9821, 190.4511) -> (290.8021, 159.0733) construction
  line L14 (290.8021, 159.0733) -> (309.9082, 142.3366) construction
  line L15 (309.9082, 142.3366) -> (320.7904, 132.804) construction
  line L16 (290.8021, 159.0733) -> (284.5175, 151.8989) construction
  arc A26 (284.5175, 151.8989) -> (303.6236, 135.1623) centre (283.6185, 131.5988) ccw construction
  line L17 (303.6236, 135.1623) -> (309.9082, 142.3366) construction
  circle A27 centre (298.0335, 80.9369) radius 2.5527 construction
  circle A28 centre (301.2085, 93.2336) radius 2.5527 construction
  circle A29 centre (294.8585, 68.6402) radius 2.5527 construction
  circle A30 centre (153.586, -177.8) radius 14.2875 construction
  circle A31 centre (167.1631, 165.1) radius 14.2875 construction
  circle A32 centre (283.6185, 131.5988) radius 12.7 construction
  point P0 (279.5294, 143.6226)
  point P1 (271.1611, 134.0695)
  point P2 (275.2501, 122.0458)
  point P3 (287.7075, 119.5751)
  point P4 (296.0758, 129.1282)
  point P5 (291.9868, 141.1519)
  dimension "d116" = 25.4
  dimension "d117" = 19.05
  dimension "d120" = 360
hole "Hole5" at (3.175, 143.6226, 279.5294) at (3.175, 134.0695, 271.1611) at (3.175, 122.0458, 275.2501) at (3.175, 119.5751, 287.7075) at (3.175, 129.1282, 296.0758) at (3.175, 141.1519, 291.9868) direction (1, 0, 0) diameter 5.1054 end through all
sketch "Sketch13" plane through (6.35, 0, 0) normal (1, 0, 0) x (0, 0, -1)
  circle A0 centre (-296.0758, 129.1282) radius 2.5527 construction
  circle A1 centre (-275.2501, 122.0458) radius 2.5527 construction
  circle A2 centre (-279.5294, 143.6226) radius 2.5527 construction
  circle A3 centre (-271.1611, 134.0695) radius 2.5527 construction
  circle A4 centre (-287.7075, 119.5751) radius 2.5527 construction
  circle A5 centre (-291.9868, 141.1519) radius 2.5527 construction
  circle A6 centre (-247.5393, 27.9128) radius 14.2875 construction
  circle A7 centre (-283.6185, 131.5988) radius 9.525 construction
  circle A8 centre (-239.0544, -9.2303) radius 14.2875 construction
  arc A9 (-320.7904, 132.804) -> (-322.8331, 126.1854) centre (-316.4388, 127.8364) ccw construction
  line L0 (-320.7904, 132.804) -> (-254.9821, 190.4511) construction
  arc A10 (-250.6306, 192.0875) -> (-254.9821, 190.4511) centre (-250.6306, 185.4835) ccw construction
  line L1 (-250.6306, 192.0875) -> (-167.1631, 192.0875) construction
  arc A11 (-141.4456, 156.9185) -> (-167.1631, 192.0875) centre (-167.1631, 165.1) ccw construction
  arc A12 (-143.4989, 153.8574) -> (-141.4456, 156.9185) centre (-147.7388, 158.9206) ccw construction
  line L2 (-143.4989, 153.8574) -> (-150.9888, 147.5854) construction
  arc A13 (-150.9888, 147.5854) -> (-138.0199, -159.7797) centre (0, 0) ccw construction
  arc A14 (-174.3536, -189.4509) -> (-138.0199, -159.7797) centre (-153.586, -177.8) ccw construction
  line L3 (-174.3536, -189.4509) -> (-298.0299, 31.0012) construction
  arc A15 (-298.6647, 32.5814) -> (-298.0299, 31.0012) centre (-292.2704, 34.2324) ccw construction
  line L4 (-298.6647, 32.5814) -> (-322.8331, 126.1854) construction
  circle A16 centre (-298.0335, 80.9369) radius 2.5527 construction
  circle A17 centre (-301.2085, 93.2336) radius 2.5527 construction
  circle A18 centre (-294.8585, 68.6402) radius 2.5527 construction
  circle A19 centre (-153.586, -177.8) radius 14.2875 construction
  circle A20 centre (-167.1631, 165.1) radius 14.2875 construction
  circle A21 centre (-226.6273, 167.1472) radius 14.2875
  circle A22 centre (-226.6273, 167.1472) radius 23.749 construction
  circle A23 centre (-167.1631, 165.1) radius 35.7505 construction
  circle A24 centre (-283.6185, 131.5988) radius 6.35 construction
  circle A25 centre (-258.3004, 104.8511) radius 30.48 construction
  circle A26 centre (-258.3004, 104.8511) radius 14.2875
  circle A27 centre (-226.6273, 167.1472) radius 30.5054 construction
  dimension "d133" = 28.575
  dimension "d134" = 47.498
  dimension "d135" = 71.501
  dimension "d138" = 12.7
  dimension "d139" = 60.96
  dimension "d142" = 69.8856
  dimension "d143" = 61.0108
  dimension "d144" = 57.15
extrude "Extrusion7" cut sketch "Sketch13" against normal through all
properties part number "GP4-008" material "Polycarbonate, Smoke"
